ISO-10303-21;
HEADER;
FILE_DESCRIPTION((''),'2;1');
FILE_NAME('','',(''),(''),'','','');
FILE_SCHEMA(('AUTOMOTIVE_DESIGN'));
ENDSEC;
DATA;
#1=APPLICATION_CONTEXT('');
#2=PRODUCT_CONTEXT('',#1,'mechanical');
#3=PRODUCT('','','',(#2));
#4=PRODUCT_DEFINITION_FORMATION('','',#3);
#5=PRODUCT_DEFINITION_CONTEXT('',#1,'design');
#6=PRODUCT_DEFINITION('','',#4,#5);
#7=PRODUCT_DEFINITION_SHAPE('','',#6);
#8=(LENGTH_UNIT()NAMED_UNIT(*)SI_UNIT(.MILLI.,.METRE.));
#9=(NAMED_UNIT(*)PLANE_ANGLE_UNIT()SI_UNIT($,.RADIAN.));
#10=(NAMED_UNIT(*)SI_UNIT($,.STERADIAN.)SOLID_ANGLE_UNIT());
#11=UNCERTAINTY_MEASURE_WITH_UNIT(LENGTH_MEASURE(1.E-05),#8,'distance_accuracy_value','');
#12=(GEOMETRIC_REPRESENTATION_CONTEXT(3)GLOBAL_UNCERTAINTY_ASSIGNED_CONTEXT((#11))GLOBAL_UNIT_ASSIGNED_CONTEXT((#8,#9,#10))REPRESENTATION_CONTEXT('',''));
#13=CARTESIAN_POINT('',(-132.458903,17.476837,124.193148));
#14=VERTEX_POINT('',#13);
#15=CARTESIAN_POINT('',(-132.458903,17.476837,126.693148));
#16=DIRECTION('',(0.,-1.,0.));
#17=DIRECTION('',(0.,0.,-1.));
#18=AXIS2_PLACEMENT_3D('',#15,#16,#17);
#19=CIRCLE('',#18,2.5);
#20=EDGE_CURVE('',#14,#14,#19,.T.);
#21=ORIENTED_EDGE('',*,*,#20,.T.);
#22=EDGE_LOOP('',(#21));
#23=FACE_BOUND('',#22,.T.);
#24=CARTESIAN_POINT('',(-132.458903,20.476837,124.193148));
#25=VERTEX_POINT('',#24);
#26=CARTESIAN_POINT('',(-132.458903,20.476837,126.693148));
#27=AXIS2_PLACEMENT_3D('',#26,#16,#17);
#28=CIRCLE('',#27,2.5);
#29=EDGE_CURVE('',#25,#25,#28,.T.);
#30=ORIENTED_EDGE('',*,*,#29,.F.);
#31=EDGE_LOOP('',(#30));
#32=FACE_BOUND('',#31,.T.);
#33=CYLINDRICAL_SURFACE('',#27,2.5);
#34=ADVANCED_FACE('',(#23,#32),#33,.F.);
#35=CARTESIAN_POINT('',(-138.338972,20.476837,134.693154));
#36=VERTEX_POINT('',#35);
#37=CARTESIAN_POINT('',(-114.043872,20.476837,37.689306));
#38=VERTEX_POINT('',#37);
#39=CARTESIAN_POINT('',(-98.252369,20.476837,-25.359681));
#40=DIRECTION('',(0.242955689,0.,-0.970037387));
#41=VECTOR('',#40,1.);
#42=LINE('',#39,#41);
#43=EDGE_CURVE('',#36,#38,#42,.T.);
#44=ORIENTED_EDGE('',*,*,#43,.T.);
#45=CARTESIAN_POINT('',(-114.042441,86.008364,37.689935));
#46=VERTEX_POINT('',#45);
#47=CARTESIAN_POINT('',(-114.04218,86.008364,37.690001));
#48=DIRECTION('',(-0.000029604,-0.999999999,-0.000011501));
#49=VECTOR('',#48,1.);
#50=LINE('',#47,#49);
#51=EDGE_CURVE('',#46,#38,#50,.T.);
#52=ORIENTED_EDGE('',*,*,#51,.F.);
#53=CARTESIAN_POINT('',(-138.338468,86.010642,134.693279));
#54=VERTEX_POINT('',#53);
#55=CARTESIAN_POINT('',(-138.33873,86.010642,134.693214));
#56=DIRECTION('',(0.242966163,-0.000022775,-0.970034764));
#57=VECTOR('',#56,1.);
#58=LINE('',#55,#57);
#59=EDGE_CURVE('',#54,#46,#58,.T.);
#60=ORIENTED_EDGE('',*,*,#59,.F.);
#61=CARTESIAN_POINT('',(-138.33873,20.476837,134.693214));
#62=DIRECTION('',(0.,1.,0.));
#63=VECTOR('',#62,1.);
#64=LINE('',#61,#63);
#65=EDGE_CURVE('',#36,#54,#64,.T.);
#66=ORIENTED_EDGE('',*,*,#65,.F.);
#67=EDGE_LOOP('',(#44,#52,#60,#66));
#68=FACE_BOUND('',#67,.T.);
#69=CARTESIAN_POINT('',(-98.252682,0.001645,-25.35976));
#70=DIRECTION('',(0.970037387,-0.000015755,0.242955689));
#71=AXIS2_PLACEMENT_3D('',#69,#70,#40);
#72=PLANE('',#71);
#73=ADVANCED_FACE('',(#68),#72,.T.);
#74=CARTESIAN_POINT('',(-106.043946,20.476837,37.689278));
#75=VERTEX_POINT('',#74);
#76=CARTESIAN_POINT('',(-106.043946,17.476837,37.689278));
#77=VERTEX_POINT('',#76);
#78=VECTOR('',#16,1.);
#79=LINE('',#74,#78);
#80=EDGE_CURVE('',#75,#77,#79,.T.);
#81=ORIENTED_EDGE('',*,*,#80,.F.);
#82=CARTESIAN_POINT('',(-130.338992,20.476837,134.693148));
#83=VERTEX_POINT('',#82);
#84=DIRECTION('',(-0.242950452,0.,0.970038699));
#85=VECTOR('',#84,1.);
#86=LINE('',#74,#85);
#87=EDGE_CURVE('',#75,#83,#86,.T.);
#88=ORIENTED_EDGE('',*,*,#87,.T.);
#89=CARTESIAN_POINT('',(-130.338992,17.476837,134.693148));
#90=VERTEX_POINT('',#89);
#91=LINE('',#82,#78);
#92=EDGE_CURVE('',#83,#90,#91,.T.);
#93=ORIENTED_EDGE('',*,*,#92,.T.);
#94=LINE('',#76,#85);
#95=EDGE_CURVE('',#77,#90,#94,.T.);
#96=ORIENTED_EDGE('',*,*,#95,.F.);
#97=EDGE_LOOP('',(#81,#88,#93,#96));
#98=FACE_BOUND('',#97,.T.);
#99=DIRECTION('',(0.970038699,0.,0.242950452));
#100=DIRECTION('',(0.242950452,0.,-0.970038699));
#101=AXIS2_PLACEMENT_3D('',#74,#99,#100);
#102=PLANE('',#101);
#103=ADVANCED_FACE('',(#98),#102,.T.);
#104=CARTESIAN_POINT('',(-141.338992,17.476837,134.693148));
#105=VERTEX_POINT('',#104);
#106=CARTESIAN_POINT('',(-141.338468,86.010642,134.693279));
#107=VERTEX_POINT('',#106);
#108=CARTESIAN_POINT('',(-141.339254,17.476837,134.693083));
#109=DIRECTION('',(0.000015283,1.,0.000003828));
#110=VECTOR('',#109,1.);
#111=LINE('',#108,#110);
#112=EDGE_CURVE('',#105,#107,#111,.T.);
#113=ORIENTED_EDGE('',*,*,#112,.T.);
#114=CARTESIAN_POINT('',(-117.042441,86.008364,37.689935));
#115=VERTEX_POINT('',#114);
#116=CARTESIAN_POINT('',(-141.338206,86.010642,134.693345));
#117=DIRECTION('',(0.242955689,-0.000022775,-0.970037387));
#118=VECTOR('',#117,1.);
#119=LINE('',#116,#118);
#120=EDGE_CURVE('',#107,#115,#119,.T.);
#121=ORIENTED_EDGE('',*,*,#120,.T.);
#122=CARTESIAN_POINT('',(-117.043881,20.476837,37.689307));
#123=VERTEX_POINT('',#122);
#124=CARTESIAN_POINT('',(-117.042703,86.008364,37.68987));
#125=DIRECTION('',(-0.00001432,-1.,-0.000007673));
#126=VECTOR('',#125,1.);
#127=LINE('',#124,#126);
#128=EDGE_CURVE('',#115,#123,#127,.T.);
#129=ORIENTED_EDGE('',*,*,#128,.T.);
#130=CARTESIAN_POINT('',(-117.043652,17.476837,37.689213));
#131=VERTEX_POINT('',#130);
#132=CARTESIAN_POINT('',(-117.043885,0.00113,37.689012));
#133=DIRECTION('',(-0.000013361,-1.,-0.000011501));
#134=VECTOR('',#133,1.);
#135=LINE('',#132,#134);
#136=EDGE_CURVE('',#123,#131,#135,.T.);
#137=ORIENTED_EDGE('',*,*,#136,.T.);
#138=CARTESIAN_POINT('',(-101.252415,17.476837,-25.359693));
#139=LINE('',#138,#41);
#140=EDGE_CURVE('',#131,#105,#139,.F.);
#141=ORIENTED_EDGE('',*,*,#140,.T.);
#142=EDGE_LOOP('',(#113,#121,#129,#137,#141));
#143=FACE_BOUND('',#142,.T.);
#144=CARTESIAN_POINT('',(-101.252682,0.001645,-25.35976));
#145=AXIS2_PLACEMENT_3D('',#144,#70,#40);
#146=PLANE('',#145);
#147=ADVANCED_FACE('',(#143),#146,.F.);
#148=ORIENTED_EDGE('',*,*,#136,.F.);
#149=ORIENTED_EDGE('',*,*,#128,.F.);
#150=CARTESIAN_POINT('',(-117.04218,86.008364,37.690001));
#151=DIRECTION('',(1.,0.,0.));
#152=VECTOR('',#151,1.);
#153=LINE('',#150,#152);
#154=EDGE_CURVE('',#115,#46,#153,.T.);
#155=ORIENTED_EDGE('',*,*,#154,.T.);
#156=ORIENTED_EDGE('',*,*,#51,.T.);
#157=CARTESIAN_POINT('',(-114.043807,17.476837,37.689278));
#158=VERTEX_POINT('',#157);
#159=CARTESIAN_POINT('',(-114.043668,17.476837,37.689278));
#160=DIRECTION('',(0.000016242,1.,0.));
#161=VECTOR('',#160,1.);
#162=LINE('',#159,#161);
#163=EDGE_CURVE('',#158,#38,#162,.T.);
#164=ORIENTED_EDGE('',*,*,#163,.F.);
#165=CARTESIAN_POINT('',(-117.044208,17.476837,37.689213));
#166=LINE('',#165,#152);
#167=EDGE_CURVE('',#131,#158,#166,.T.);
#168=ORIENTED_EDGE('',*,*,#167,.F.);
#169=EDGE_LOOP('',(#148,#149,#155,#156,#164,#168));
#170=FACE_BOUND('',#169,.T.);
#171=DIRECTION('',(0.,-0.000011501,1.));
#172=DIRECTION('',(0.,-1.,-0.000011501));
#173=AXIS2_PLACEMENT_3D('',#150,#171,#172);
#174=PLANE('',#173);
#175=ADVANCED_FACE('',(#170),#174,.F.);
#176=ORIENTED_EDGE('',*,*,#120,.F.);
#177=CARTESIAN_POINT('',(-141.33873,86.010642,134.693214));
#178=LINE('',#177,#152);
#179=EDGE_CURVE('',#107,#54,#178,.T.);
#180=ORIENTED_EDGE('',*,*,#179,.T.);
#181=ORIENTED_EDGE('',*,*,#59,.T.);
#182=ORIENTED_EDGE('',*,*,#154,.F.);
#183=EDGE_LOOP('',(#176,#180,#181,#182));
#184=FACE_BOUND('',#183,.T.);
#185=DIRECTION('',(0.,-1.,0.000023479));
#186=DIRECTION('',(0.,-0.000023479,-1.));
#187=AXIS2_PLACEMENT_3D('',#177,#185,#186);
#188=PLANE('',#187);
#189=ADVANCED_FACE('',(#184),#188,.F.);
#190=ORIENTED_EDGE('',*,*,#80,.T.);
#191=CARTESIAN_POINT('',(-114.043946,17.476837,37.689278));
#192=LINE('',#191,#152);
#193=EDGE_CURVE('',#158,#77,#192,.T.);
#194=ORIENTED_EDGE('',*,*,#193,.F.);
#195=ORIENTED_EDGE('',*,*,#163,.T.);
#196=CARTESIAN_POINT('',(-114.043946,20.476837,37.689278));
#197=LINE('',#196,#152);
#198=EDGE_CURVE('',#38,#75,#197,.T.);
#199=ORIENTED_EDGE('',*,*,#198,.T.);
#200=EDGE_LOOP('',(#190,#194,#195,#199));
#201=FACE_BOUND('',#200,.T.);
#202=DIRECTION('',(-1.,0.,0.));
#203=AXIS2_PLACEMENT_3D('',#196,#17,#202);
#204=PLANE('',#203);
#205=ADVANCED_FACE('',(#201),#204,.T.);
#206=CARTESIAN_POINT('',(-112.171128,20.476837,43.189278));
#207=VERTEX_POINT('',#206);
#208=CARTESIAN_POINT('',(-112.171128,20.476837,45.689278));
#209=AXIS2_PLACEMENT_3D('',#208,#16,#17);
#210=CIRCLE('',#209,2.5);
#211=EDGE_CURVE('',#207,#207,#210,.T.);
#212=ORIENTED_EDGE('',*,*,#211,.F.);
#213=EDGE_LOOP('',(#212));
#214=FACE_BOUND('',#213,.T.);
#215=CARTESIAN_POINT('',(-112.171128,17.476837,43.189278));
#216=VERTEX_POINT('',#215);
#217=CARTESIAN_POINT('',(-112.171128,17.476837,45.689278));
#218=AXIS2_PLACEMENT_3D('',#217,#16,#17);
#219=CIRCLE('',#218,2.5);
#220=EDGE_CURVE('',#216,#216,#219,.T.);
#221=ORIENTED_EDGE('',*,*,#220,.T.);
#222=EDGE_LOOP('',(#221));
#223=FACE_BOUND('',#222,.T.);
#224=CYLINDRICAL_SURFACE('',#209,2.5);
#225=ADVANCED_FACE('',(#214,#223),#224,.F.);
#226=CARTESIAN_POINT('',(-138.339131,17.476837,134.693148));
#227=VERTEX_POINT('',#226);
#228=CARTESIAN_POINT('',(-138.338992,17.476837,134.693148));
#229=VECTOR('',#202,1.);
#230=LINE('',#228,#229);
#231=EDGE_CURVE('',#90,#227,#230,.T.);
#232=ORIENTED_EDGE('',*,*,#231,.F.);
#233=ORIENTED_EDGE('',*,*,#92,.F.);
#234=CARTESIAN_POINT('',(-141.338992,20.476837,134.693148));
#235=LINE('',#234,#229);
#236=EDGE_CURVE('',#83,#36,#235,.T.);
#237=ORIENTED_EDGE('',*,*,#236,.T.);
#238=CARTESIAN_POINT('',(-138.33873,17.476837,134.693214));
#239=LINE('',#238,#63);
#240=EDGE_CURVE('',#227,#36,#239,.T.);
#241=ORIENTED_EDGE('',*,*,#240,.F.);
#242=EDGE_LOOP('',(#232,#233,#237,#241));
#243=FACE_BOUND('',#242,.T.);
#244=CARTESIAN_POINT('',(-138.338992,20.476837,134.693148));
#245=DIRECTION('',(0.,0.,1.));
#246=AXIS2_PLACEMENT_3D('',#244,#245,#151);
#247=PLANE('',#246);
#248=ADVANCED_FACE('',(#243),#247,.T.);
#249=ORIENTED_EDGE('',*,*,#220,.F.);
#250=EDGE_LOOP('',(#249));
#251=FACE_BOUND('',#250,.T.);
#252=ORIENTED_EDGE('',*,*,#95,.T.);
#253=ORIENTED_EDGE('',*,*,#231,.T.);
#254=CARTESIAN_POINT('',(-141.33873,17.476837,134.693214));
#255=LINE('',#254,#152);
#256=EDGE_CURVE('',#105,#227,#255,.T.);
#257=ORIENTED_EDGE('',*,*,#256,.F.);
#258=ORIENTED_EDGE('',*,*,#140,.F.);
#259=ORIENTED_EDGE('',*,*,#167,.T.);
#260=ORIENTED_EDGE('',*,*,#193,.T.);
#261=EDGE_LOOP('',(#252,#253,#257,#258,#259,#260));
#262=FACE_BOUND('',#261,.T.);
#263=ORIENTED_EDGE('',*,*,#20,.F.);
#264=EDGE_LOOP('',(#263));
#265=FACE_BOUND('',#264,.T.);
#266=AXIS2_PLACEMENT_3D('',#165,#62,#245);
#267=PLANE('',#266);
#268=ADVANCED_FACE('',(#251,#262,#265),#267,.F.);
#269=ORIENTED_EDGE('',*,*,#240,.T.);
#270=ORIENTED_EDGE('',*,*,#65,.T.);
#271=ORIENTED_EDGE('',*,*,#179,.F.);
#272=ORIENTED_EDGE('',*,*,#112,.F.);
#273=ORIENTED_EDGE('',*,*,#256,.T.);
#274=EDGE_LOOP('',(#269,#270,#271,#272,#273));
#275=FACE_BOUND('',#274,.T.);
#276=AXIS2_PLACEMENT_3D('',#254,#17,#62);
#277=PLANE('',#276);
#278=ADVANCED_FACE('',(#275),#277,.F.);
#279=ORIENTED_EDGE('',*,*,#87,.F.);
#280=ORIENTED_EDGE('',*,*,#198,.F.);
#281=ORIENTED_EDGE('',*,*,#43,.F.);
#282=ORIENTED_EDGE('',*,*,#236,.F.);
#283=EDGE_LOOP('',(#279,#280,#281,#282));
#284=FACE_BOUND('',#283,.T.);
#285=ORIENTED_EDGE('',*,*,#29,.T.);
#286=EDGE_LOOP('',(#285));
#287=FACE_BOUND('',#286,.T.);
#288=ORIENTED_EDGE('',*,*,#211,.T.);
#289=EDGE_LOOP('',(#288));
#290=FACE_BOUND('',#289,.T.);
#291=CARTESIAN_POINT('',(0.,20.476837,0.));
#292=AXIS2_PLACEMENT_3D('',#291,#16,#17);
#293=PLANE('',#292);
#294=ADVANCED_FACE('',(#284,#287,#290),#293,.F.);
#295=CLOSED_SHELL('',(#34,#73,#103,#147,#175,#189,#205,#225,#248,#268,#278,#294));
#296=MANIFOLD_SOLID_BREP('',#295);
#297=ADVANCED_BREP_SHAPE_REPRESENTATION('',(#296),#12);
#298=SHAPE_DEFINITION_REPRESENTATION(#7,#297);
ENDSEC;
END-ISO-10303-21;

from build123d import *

# Parameters (mm, degrees)
BOSS_EXTRUDE6_START       = -141.338468014
BOSS_EXTRUDE6_DEPTH       = 27.296026611
BOSS_EXTRUDE6_START_2     = -101.470072675
BOSS_EXTRUDE6_2_OUTLINE_W = 72
BOSS_EXTRUDE6_2_OUTLINE_H = 103
BOSS_EXTRUDE6_2_DEPTH     = 23.568848061
BOSS_EXTRUDE6_START_3     = -127.947953139
BOSS_EXTRUDE6_3_OUTLINE_W = 72
BOSS_EXTRUDE6_3_OUTLINE_H = 103
BOSS_EXTRUDE6_3_DEPTH     = 23.567768302
SKETCH1_R                 = 2.5
BOSS_EXTRUDE8_DEPTH       = 3


with BuildPart() as part:
    # Boss-Extrude6: read off the stored shape, not the designer's step
    # Boss-Extrude6 outline → Boss-Extrude6 (new body)
    with BuildSketch(Plane.YZ.offset(BOSS_EXTRUDE6_START)):
        Polygon((86.01064189, 134.693213905), (17.476837079, 134.693213905), (17.476837075, 37.689278418), (86.008364377, 37.690000992), align=None)
    extrude(amount=BOSS_EXTRUDE6_DEPTH)

    # Boss-Extrude6 2 outline → Boss-Extrude6 2 (cut)
    with BuildSketch(Plane(origin=(0, 0, 0), x_dir=(1.5283083166138014e-05, 0.9999999998758877, 3.827802984502311e-06), z_dir=(0.9700373872996308, -1.5755148579155195e-05, 0.24295568936059395)).offset(BOSS_EXTRUDE6_START_2)):
        with Locations((52, 114.5)):
            Rectangle(BOSS_EXTRUDE6_2_OUTLINE_W, BOSS_EXTRUDE6_2_OUTLINE_H)
    extrude(amount=BOSS_EXTRUDE6_2_DEPTH, mode=Mode.SUBTRACT)

    # Boss-Extrude6 3 outline → Boss-Extrude6 3 (cut)
    with BuildSketch(Plane(origin=(0, 0, 0), x_dir=(1.5283083166138014e-05, 0.9999999998758877, 3.827802984502311e-06), z_dir=(0.9700373872996308, -1.5755148579155195e-05, 0.24295568936059395)).offset(BOSS_EXTRUDE6_START_3)):
        with Locations((52, 114.5)):
            Rectangle(BOSS_EXTRUDE6_3_OUTLINE_W, BOSS_EXTRUDE6_3_OUTLINE_H)
    extrude(amount=BOSS_EXTRUDE6_3_DEPTH, mode=Mode.SUBTRACT)

    # Sketch1 → Boss-Extrude8 (add)
    with BuildSketch(Plane.XZ.offset(-17.476837075)):
        Polygon((-138.338991718, 134.693148321), (-130.338991718, 134.693148321), (-106.043946484, 37.689278418), (-114.043946484, 37.689278418), (-117.043946484, 37.689278418), (-141.338991718, 134.693148321), align=None)
        with Locations(Location((-132.458903411, 126.693148321, 0), (0, 0, 270))):
            Circle(SKETCH1_R, mode=Mode.SUBTRACT)
        with Locations(Location((-112.171128445, 45.689278418, 0), (0, 0, 270))):
            Circle(SKETCH1_R, mode=Mode.SUBTRACT)
    extrude(amount=-BOSS_EXTRUDE8_DEPTH)


solid = part.part
